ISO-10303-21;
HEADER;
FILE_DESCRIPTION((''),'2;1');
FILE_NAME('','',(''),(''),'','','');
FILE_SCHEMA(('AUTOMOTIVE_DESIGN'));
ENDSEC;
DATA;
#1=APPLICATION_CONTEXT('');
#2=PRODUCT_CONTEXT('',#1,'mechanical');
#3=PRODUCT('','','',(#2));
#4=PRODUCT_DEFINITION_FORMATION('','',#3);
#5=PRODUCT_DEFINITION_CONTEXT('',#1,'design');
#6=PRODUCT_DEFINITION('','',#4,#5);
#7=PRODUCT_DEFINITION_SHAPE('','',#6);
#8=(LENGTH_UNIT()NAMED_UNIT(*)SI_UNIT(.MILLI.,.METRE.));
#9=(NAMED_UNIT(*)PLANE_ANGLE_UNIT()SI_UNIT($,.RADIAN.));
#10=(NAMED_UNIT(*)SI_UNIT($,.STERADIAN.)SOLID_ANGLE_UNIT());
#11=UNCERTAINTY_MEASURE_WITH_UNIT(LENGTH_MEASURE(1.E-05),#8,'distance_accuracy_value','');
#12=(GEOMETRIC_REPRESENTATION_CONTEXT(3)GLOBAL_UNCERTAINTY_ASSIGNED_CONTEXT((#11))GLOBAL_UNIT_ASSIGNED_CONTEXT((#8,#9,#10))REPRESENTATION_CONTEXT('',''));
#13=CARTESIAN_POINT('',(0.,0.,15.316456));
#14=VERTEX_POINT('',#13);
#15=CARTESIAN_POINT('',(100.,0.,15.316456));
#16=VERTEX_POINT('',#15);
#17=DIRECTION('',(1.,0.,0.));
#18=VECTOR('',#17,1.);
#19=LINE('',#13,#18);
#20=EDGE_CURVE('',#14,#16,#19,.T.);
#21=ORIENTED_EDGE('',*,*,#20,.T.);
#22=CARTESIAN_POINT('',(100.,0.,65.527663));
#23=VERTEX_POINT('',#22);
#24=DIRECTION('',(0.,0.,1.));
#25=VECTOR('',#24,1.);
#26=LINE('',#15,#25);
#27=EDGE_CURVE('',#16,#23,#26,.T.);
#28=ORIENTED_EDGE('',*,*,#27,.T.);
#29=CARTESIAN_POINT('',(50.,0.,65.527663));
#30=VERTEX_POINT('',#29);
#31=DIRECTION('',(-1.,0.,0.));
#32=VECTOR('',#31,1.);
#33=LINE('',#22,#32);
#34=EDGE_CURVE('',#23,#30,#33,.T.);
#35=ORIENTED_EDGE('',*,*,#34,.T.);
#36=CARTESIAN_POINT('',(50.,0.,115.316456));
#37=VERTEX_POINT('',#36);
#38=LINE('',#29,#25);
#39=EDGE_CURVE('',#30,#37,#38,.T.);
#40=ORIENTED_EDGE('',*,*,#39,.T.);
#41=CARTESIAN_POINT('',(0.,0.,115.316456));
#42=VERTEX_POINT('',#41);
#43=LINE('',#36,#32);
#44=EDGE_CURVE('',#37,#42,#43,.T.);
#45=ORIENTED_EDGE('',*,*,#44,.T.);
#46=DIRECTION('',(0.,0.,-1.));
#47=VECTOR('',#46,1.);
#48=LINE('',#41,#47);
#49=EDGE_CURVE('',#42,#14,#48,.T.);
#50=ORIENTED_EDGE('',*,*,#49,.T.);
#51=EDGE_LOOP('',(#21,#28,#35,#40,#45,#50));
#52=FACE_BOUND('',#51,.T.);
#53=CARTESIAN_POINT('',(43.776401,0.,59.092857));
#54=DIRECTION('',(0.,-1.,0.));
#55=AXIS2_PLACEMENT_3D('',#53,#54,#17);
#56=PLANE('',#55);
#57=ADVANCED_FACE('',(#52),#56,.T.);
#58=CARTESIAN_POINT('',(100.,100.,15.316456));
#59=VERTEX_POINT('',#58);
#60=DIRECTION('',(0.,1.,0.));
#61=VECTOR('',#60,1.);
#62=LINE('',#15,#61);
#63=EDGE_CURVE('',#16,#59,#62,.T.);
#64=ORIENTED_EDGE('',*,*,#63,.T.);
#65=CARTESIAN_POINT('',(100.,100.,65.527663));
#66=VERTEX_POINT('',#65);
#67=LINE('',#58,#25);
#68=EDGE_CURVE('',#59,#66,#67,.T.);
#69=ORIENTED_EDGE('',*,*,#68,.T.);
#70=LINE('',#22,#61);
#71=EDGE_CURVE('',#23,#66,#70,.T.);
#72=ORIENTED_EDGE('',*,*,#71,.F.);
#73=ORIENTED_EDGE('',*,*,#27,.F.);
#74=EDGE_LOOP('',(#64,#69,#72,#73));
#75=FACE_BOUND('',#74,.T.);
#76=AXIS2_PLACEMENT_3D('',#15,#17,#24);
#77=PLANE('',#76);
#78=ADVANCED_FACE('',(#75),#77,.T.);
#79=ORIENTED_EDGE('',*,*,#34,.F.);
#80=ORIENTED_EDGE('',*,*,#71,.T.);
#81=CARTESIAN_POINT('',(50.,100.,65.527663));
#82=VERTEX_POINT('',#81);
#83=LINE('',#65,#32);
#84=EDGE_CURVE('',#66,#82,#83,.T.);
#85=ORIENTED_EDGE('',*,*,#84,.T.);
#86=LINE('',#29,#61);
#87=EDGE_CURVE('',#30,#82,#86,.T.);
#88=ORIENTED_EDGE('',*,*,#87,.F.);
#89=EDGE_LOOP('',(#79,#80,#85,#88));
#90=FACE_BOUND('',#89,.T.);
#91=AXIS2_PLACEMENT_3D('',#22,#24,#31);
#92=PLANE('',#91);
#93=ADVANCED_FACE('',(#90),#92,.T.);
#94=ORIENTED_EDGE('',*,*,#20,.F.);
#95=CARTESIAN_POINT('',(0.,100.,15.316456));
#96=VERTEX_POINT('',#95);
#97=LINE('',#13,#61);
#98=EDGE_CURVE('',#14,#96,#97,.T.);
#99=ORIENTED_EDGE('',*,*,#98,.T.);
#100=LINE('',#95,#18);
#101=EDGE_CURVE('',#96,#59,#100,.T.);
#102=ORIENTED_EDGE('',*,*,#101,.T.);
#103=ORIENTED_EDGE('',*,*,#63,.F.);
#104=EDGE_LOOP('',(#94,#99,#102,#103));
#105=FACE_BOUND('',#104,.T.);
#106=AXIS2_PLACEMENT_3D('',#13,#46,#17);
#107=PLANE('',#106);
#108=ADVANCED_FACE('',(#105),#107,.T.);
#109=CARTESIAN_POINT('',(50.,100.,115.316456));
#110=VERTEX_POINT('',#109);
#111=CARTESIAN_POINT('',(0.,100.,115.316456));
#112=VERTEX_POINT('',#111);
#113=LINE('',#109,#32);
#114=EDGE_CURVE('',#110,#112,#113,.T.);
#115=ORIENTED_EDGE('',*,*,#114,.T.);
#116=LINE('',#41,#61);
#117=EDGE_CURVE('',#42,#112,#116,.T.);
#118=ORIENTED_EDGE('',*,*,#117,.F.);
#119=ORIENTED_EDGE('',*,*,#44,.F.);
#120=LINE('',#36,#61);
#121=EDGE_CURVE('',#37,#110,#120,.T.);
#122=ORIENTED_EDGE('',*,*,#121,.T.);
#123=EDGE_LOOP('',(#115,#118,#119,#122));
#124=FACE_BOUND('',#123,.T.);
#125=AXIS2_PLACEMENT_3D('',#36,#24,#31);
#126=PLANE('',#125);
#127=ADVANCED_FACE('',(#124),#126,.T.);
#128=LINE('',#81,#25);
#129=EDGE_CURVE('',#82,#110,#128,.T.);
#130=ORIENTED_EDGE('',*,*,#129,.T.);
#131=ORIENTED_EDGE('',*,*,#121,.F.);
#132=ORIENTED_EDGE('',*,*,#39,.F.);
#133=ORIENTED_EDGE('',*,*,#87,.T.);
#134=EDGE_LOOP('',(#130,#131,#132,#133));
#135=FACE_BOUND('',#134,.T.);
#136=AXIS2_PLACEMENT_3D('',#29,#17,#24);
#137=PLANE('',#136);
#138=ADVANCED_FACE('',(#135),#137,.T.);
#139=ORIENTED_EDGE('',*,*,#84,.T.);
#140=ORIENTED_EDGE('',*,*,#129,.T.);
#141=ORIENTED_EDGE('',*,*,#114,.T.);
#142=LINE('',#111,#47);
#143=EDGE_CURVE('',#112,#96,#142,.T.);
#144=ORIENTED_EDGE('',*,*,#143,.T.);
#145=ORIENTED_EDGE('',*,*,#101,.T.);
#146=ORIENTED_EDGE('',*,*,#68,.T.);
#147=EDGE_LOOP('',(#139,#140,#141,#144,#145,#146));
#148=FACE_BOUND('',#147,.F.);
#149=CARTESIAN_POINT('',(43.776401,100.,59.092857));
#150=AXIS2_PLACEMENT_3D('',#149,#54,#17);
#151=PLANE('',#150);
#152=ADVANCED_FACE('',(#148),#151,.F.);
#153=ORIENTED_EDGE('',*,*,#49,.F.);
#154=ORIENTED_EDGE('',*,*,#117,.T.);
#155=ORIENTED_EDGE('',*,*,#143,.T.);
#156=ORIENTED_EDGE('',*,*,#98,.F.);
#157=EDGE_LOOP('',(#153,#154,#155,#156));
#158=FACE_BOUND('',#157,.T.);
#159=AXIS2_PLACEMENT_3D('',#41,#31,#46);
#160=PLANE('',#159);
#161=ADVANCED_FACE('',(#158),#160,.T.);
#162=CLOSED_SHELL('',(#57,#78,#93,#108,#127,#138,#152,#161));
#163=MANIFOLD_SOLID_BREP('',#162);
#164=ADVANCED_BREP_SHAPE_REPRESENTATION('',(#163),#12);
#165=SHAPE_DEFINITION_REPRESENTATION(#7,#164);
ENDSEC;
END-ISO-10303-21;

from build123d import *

# Parameters (mm, degrees)
F1_DEPTH = 100


# Not quite as in the source:
# - a feature names something its author has since deleted; it is built from what else it names


with BuildPart() as f1:
    # F0 (on Front) → F1 (new body)
    with BuildSketch(Plane.XZ):
        Polygon((50, 115.3164558689), (0, 115.3164558689), (0, 15.3164558689), (100, 15.3164558689), (100, 65.5276626348), (50, 65.5276626348), align=None)
    extrude(amount=-F1_DEPTH)


solid = f1.part
